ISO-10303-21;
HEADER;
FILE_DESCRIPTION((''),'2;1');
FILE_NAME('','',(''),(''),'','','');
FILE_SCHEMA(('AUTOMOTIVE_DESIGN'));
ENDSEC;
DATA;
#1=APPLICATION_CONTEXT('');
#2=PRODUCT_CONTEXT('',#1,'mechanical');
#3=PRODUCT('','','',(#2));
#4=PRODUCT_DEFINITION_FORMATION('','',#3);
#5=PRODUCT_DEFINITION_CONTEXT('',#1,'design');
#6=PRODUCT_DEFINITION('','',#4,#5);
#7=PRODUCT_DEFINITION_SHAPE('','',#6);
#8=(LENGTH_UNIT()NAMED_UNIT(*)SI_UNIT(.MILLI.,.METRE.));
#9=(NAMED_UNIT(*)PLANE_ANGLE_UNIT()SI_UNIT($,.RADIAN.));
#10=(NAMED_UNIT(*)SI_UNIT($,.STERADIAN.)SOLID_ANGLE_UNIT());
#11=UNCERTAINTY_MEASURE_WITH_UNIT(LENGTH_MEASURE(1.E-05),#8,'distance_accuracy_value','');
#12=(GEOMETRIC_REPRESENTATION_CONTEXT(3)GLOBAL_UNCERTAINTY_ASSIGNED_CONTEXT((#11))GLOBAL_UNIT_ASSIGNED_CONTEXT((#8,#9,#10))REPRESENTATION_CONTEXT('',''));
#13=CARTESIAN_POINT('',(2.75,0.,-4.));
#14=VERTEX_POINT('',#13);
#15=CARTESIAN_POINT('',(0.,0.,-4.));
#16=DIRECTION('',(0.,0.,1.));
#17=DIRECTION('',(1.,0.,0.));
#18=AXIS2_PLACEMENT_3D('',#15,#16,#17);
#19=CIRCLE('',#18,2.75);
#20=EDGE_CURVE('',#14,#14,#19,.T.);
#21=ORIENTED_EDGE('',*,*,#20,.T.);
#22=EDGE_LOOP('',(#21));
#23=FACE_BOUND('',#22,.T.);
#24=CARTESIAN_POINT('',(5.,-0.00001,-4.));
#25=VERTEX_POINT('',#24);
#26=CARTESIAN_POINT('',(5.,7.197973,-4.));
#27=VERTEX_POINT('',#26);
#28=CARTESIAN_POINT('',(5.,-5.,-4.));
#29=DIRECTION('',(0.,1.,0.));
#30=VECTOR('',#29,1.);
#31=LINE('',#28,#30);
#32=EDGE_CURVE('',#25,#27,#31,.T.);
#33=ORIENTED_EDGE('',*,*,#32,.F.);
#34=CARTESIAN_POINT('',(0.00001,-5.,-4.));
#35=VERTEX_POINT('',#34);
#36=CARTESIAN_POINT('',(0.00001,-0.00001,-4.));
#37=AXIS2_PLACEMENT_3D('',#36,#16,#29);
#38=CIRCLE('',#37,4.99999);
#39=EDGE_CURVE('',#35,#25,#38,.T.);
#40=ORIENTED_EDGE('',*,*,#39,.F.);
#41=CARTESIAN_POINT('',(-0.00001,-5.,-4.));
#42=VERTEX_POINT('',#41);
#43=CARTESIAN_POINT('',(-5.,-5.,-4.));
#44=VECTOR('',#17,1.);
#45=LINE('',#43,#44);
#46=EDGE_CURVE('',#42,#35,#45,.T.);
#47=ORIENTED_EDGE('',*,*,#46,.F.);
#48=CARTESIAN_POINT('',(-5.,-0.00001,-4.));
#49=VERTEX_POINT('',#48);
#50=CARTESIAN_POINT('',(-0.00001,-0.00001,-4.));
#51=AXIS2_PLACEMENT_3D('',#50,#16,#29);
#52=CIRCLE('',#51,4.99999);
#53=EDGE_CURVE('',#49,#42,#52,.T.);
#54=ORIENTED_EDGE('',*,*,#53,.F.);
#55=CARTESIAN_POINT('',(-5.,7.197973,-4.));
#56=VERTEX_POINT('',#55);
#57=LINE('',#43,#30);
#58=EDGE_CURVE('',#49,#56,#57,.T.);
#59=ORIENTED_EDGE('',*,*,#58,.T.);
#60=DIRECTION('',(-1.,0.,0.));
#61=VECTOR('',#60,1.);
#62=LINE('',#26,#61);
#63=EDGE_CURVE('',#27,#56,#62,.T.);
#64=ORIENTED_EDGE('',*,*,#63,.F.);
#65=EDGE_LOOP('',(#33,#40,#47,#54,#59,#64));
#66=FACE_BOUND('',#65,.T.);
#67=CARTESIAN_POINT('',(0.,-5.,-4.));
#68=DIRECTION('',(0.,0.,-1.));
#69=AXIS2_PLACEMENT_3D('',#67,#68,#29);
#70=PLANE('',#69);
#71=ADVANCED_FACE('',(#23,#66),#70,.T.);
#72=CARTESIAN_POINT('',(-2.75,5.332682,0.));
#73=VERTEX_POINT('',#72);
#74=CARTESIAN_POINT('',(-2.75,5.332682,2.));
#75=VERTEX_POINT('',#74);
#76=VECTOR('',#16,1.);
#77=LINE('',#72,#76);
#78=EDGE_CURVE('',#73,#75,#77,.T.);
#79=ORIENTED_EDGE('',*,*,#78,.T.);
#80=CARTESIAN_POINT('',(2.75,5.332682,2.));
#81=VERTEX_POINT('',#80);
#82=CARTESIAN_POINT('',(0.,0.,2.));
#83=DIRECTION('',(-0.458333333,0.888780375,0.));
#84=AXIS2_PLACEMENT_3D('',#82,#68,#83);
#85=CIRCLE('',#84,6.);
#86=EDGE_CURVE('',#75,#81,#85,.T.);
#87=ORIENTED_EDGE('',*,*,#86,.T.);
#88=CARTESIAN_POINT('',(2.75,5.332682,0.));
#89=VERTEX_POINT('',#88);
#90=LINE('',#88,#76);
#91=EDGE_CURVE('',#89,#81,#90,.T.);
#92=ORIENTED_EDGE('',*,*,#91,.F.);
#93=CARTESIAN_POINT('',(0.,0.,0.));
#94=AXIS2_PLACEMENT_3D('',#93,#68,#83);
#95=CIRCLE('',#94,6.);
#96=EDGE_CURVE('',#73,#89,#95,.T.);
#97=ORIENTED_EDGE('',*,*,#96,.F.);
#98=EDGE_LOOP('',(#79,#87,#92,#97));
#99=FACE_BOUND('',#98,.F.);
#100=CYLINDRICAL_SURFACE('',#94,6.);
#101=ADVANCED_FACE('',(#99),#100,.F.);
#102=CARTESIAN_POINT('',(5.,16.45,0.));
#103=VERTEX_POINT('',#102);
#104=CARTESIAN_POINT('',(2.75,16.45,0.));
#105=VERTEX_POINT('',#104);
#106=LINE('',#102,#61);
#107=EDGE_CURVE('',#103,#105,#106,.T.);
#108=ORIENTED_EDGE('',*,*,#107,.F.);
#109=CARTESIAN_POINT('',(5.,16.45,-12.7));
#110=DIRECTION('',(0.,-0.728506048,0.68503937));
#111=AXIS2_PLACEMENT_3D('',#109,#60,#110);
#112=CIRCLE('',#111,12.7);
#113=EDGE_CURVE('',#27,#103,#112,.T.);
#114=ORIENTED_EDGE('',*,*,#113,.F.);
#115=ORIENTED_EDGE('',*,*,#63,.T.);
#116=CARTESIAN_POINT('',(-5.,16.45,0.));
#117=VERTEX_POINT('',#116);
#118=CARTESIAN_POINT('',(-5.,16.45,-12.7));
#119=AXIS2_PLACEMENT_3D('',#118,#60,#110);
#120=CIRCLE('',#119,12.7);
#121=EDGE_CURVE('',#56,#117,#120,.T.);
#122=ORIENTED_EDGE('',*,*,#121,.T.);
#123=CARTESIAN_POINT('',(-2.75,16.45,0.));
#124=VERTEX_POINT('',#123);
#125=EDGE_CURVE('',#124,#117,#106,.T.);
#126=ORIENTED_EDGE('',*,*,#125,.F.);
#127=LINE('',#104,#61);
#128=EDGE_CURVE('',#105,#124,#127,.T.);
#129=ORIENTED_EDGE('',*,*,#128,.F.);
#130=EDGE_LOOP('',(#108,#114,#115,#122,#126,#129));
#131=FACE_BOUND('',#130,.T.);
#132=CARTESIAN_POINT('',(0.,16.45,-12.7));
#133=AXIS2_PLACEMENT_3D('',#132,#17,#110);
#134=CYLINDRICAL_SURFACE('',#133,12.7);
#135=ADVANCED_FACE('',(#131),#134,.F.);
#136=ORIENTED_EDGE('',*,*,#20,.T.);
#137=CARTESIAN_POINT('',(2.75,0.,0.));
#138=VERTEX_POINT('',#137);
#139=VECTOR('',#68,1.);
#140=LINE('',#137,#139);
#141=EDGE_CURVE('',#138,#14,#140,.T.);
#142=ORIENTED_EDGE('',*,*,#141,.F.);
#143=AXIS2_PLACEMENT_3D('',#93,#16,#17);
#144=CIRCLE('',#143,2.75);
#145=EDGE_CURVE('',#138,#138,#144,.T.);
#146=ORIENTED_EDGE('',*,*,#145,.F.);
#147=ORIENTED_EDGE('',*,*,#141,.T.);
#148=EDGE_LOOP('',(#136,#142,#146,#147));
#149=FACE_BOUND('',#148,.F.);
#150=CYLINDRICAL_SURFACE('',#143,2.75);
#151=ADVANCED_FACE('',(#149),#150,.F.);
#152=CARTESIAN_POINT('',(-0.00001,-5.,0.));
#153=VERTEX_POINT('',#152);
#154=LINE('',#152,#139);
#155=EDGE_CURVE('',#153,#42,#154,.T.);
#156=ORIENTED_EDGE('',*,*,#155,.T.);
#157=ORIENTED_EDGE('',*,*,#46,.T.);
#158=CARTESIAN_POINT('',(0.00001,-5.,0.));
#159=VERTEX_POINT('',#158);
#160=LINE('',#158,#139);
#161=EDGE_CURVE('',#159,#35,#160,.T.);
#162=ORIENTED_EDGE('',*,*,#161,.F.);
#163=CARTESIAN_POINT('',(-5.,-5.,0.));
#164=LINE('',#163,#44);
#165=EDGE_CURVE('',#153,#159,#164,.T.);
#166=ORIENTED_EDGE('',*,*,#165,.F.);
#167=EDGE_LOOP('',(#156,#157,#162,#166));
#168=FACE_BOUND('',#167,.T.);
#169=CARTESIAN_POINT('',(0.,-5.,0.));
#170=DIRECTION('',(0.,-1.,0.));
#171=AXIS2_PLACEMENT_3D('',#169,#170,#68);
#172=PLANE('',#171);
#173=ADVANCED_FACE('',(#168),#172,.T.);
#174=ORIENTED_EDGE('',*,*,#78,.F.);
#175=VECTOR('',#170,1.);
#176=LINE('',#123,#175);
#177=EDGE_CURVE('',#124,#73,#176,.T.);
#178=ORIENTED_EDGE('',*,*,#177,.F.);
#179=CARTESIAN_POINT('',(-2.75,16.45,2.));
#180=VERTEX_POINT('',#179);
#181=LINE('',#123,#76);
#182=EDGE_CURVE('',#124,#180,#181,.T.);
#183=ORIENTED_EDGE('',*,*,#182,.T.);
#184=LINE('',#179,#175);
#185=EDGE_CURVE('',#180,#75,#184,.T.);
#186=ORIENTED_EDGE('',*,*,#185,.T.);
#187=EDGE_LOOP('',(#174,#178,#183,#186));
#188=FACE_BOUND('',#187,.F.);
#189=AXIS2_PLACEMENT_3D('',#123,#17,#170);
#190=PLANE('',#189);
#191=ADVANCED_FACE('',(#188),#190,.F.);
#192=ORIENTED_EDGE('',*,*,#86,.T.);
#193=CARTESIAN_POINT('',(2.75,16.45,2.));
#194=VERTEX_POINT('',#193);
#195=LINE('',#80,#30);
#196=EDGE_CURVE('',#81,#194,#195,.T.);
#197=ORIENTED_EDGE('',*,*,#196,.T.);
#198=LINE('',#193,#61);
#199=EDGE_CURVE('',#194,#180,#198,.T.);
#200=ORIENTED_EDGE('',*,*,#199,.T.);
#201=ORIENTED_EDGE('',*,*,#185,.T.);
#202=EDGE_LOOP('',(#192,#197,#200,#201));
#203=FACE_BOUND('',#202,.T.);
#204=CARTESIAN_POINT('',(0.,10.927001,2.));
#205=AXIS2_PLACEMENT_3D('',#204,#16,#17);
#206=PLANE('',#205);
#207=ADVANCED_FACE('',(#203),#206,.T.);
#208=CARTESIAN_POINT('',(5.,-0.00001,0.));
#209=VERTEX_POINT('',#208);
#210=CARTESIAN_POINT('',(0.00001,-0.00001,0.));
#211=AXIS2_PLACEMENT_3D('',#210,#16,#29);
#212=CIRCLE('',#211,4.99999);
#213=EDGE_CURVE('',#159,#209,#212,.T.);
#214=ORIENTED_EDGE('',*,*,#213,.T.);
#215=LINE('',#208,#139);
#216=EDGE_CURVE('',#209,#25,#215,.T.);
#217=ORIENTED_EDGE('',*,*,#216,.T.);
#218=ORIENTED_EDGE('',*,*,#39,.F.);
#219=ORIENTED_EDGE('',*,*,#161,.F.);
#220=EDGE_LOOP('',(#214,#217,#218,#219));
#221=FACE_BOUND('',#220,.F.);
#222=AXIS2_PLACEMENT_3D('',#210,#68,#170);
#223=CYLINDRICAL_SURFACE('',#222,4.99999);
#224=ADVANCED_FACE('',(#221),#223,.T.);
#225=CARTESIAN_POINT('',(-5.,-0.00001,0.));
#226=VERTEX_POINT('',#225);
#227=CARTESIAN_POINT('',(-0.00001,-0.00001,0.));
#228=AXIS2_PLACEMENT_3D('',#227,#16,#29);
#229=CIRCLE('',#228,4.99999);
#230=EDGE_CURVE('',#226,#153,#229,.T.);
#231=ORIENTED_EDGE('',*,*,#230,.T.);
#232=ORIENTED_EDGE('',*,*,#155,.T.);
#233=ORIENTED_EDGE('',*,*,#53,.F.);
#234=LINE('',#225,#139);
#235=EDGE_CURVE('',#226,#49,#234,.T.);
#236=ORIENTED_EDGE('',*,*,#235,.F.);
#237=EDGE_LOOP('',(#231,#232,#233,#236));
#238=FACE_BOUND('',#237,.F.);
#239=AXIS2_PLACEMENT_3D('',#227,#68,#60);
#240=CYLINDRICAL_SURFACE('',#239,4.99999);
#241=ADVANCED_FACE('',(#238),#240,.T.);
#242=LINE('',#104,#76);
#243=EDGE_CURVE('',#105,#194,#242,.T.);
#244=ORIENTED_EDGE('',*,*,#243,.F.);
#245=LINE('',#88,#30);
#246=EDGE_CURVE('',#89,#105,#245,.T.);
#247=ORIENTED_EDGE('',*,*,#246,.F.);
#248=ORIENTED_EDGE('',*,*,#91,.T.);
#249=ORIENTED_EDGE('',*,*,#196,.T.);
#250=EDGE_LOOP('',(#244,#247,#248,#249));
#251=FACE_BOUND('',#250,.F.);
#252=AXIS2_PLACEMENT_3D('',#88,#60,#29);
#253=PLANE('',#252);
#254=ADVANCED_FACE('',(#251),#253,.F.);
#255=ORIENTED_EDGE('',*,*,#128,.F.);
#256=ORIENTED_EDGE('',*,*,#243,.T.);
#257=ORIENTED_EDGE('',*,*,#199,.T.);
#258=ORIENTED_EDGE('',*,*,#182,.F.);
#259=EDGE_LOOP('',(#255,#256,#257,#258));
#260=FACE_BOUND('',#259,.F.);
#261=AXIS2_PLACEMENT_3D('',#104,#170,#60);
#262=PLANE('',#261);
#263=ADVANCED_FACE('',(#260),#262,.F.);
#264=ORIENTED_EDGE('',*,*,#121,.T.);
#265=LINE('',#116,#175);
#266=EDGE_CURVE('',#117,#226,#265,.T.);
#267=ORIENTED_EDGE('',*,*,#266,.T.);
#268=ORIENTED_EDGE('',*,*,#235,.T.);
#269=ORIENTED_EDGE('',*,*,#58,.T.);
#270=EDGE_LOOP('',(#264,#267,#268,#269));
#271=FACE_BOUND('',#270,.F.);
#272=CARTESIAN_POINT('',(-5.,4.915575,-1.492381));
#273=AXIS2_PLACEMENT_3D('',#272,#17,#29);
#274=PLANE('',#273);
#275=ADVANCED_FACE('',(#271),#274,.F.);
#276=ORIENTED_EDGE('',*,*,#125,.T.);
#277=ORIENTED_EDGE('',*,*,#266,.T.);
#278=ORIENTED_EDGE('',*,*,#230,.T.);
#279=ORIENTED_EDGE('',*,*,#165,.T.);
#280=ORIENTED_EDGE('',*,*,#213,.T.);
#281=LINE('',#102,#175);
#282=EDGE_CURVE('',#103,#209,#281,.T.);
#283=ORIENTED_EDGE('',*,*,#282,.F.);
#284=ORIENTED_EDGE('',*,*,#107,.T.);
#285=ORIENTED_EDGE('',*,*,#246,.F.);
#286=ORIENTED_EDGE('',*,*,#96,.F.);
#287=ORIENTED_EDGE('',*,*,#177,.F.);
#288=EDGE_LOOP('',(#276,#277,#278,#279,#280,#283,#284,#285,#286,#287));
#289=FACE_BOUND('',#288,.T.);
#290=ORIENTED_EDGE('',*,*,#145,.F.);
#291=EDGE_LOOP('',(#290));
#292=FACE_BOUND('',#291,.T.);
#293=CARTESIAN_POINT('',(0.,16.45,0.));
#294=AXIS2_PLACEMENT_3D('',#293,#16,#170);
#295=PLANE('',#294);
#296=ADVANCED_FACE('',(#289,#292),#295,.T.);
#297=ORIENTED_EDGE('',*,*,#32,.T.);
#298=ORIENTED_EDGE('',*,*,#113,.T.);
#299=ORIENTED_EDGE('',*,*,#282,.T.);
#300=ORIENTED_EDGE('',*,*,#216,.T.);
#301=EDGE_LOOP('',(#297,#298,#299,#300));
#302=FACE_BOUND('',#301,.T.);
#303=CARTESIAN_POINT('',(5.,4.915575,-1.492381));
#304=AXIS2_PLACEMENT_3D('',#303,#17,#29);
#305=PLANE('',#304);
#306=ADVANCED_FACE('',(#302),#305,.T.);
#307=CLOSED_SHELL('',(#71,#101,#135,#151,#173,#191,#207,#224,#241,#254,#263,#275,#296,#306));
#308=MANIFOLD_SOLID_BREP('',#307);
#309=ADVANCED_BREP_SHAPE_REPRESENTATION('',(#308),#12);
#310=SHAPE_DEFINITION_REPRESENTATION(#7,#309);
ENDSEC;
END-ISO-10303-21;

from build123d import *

# Parameters (mm, degrees)
F1_DEPTH = 5
F2_R     = 2.75
F3_DEPTH = 4.001
F4_R     = 4.99999
F6_DEPTH = 2


# Not quite as in the source:
# - a fillet or chamfer is up to 0.001 mm smaller than in the source, because OpenCascade refuses the exact size


with BuildPart() as f1:
    # F0 (on Right) → F1 (new body, symmetric)
    with BuildSketch(Plane.YZ):
        with BuildLine():
            Line((16.45, 0), (0, 0))
            Line((0, 0), (-5, 0))
            Line((-5, 0), (-5, -4))
            Line((-5, -4), (7.197973195, -4))
            ThreePointArc((7.197973195, -4), (11.4101587327, -1.0428133754), (16.45, 0))
        make_face()
    extrude(amount=F1_DEPTH, both=True)

    # F2 (on face) → F3 (cut, through all)
    with BuildSketch(Plane.XY):
        Circle(F2_R)
    extrude(amount=-F3_DEPTH, mode=Mode.SUBTRACT)

    # F4 (radius 5 in the source; OpenCascade refuses exactly that, so slightly less here)
    f4_edges = [f1.edges().sort_by_distance(p)[0] for p in [
        (5, -5, -2),
        (-5, -5, -2),
    ]]
    fillet(f4_edges, radius=F4_R)

    # F5 (on face) → F6 (join)
    with BuildSketch(Plane.XY):
        with BuildLine():
            Line((-2.75, 16.45), (-2.75, 5.3326822519))
            ThreePointArc((-2.75, 5.3326822519), (0, 6), (2.75, 5.3326822519))
            Line((2.75, 5.3326822519), (2.75, 16.45))
            Line((2.75, 16.45), (-2.75, 16.45))
        make_face()
    extrude(amount=F6_DEPTH)


solid = f1.part
